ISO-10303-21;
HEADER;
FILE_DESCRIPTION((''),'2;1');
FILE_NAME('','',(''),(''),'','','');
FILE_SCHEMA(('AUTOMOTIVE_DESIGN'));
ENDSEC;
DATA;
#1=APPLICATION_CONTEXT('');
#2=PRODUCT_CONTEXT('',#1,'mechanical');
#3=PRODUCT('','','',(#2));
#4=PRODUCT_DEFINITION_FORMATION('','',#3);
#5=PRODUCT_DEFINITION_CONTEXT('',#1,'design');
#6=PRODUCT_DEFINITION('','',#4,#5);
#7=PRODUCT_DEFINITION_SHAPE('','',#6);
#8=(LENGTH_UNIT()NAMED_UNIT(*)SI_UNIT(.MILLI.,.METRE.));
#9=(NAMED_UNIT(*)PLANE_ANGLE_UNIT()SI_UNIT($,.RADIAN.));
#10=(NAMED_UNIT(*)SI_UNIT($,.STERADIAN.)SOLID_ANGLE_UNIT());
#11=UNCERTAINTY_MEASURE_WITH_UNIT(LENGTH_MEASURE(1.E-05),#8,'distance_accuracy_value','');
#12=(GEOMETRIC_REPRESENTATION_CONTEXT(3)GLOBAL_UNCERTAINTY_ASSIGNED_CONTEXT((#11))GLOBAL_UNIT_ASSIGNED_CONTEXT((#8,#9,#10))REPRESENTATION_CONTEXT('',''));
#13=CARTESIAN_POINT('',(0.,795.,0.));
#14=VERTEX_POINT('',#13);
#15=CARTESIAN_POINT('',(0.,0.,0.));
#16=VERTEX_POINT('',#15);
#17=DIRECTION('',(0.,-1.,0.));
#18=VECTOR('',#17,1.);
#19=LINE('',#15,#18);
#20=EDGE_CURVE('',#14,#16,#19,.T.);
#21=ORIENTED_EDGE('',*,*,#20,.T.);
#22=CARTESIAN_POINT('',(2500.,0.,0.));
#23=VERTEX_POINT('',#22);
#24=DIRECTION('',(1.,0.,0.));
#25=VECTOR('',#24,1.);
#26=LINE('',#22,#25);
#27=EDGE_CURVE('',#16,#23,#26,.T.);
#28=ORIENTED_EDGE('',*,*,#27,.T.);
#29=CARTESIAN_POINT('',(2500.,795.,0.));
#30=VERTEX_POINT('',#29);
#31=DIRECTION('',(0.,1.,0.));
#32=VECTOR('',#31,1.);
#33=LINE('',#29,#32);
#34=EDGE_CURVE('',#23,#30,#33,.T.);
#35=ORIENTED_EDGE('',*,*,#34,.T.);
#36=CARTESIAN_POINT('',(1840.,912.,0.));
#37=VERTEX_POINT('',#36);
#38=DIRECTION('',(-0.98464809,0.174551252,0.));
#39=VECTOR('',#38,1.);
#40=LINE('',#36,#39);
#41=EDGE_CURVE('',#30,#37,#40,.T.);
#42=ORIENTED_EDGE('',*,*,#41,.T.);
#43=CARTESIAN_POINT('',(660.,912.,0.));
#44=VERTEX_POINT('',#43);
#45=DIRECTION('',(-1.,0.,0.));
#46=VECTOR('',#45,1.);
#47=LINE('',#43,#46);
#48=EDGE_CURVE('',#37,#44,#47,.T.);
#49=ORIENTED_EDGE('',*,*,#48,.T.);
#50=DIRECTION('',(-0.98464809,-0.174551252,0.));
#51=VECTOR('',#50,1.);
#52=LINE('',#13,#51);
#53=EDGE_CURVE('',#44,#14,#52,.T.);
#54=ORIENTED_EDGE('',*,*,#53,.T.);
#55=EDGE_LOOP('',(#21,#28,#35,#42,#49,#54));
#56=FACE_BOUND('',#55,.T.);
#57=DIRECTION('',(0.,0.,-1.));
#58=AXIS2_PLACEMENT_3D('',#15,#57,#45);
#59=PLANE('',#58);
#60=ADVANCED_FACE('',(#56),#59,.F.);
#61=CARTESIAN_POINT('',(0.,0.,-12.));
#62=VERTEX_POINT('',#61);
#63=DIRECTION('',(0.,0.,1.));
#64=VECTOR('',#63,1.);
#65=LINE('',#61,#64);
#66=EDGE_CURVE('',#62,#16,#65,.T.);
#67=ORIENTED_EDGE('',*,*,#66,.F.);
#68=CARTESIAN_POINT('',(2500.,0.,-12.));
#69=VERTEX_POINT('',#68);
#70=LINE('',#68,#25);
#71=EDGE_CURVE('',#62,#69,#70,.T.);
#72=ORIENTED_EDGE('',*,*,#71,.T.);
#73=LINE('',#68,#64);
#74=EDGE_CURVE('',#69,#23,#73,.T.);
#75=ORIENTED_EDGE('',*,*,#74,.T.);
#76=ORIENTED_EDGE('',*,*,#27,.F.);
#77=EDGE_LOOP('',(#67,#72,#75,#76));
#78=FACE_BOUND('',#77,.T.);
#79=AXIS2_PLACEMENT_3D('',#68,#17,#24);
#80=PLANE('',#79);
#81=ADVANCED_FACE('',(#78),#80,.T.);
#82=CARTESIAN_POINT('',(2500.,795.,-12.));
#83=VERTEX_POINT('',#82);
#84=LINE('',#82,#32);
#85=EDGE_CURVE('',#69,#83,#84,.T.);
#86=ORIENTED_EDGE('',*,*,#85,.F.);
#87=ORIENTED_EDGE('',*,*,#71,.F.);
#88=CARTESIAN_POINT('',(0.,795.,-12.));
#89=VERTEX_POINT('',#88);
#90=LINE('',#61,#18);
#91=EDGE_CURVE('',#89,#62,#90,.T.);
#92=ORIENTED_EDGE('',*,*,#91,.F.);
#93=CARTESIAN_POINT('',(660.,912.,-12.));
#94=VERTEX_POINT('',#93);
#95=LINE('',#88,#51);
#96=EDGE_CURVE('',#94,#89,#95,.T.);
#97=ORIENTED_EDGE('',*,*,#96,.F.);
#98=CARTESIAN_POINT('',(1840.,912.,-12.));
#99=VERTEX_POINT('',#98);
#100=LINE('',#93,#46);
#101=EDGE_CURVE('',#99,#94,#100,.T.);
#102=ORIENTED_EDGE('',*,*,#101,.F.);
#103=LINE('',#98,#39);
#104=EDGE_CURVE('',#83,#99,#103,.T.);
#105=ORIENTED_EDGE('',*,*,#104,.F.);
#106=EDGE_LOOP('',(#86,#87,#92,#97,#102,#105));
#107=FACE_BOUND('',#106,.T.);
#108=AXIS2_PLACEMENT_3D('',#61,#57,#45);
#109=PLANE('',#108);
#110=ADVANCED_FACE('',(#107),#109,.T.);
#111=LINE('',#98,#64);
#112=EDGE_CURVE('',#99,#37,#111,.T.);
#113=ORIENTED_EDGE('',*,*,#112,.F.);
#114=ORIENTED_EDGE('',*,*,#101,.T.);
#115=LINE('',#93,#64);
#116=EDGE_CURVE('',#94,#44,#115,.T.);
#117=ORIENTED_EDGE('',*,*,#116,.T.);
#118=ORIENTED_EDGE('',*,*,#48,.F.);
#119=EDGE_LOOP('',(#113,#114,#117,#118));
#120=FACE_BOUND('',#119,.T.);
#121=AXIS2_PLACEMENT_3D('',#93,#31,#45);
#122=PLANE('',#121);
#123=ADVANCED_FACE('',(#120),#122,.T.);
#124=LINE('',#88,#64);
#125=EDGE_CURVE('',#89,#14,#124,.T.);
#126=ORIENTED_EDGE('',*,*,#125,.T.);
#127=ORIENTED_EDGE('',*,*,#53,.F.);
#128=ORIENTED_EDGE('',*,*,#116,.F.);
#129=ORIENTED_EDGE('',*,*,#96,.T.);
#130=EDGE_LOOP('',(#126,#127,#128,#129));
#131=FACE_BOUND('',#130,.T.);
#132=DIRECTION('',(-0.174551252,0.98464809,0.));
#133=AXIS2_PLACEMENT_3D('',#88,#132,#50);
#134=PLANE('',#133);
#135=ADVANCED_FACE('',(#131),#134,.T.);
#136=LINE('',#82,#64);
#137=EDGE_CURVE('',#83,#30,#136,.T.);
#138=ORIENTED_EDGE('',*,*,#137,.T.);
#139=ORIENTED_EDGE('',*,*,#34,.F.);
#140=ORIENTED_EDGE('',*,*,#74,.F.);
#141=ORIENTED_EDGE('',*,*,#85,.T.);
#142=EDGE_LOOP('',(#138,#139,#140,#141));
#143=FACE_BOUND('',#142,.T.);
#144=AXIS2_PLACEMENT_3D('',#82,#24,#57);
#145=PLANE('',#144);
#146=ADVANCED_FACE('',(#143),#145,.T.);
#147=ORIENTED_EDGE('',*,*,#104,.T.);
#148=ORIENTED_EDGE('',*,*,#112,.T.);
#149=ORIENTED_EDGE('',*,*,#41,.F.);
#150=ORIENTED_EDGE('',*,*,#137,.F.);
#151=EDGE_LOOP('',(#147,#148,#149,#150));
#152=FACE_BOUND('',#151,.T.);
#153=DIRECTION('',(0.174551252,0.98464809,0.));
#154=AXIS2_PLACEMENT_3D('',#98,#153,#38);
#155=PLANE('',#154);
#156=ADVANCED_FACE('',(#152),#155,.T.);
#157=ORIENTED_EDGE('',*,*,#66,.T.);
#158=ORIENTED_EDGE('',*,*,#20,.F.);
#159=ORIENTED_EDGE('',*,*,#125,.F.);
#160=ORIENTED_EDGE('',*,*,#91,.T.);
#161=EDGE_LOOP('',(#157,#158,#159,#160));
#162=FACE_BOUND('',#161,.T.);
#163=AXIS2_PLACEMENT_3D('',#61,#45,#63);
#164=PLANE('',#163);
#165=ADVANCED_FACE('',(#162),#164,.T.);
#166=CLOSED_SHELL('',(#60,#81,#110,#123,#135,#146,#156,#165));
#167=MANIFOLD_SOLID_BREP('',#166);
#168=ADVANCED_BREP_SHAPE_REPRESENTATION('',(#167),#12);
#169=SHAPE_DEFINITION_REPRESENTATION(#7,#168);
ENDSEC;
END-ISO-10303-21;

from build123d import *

# Parameters (mm, degrees)
TABAN_FLAN_1_DEPTH = 12


# Sheet-metal steps are written as plain solids
with BuildPart() as part:
    # Çizim1 → Taban-Flanş1 (new body)
    with BuildSketch(Plane.XY):
        Polygon((0, 0), (0, 795), (660, 912), (1840, 912), (2500, 795), (2500, 0), align=None)
    extrude(amount=-TABAN_FLAN_1_DEPTH)


solid = part.part
